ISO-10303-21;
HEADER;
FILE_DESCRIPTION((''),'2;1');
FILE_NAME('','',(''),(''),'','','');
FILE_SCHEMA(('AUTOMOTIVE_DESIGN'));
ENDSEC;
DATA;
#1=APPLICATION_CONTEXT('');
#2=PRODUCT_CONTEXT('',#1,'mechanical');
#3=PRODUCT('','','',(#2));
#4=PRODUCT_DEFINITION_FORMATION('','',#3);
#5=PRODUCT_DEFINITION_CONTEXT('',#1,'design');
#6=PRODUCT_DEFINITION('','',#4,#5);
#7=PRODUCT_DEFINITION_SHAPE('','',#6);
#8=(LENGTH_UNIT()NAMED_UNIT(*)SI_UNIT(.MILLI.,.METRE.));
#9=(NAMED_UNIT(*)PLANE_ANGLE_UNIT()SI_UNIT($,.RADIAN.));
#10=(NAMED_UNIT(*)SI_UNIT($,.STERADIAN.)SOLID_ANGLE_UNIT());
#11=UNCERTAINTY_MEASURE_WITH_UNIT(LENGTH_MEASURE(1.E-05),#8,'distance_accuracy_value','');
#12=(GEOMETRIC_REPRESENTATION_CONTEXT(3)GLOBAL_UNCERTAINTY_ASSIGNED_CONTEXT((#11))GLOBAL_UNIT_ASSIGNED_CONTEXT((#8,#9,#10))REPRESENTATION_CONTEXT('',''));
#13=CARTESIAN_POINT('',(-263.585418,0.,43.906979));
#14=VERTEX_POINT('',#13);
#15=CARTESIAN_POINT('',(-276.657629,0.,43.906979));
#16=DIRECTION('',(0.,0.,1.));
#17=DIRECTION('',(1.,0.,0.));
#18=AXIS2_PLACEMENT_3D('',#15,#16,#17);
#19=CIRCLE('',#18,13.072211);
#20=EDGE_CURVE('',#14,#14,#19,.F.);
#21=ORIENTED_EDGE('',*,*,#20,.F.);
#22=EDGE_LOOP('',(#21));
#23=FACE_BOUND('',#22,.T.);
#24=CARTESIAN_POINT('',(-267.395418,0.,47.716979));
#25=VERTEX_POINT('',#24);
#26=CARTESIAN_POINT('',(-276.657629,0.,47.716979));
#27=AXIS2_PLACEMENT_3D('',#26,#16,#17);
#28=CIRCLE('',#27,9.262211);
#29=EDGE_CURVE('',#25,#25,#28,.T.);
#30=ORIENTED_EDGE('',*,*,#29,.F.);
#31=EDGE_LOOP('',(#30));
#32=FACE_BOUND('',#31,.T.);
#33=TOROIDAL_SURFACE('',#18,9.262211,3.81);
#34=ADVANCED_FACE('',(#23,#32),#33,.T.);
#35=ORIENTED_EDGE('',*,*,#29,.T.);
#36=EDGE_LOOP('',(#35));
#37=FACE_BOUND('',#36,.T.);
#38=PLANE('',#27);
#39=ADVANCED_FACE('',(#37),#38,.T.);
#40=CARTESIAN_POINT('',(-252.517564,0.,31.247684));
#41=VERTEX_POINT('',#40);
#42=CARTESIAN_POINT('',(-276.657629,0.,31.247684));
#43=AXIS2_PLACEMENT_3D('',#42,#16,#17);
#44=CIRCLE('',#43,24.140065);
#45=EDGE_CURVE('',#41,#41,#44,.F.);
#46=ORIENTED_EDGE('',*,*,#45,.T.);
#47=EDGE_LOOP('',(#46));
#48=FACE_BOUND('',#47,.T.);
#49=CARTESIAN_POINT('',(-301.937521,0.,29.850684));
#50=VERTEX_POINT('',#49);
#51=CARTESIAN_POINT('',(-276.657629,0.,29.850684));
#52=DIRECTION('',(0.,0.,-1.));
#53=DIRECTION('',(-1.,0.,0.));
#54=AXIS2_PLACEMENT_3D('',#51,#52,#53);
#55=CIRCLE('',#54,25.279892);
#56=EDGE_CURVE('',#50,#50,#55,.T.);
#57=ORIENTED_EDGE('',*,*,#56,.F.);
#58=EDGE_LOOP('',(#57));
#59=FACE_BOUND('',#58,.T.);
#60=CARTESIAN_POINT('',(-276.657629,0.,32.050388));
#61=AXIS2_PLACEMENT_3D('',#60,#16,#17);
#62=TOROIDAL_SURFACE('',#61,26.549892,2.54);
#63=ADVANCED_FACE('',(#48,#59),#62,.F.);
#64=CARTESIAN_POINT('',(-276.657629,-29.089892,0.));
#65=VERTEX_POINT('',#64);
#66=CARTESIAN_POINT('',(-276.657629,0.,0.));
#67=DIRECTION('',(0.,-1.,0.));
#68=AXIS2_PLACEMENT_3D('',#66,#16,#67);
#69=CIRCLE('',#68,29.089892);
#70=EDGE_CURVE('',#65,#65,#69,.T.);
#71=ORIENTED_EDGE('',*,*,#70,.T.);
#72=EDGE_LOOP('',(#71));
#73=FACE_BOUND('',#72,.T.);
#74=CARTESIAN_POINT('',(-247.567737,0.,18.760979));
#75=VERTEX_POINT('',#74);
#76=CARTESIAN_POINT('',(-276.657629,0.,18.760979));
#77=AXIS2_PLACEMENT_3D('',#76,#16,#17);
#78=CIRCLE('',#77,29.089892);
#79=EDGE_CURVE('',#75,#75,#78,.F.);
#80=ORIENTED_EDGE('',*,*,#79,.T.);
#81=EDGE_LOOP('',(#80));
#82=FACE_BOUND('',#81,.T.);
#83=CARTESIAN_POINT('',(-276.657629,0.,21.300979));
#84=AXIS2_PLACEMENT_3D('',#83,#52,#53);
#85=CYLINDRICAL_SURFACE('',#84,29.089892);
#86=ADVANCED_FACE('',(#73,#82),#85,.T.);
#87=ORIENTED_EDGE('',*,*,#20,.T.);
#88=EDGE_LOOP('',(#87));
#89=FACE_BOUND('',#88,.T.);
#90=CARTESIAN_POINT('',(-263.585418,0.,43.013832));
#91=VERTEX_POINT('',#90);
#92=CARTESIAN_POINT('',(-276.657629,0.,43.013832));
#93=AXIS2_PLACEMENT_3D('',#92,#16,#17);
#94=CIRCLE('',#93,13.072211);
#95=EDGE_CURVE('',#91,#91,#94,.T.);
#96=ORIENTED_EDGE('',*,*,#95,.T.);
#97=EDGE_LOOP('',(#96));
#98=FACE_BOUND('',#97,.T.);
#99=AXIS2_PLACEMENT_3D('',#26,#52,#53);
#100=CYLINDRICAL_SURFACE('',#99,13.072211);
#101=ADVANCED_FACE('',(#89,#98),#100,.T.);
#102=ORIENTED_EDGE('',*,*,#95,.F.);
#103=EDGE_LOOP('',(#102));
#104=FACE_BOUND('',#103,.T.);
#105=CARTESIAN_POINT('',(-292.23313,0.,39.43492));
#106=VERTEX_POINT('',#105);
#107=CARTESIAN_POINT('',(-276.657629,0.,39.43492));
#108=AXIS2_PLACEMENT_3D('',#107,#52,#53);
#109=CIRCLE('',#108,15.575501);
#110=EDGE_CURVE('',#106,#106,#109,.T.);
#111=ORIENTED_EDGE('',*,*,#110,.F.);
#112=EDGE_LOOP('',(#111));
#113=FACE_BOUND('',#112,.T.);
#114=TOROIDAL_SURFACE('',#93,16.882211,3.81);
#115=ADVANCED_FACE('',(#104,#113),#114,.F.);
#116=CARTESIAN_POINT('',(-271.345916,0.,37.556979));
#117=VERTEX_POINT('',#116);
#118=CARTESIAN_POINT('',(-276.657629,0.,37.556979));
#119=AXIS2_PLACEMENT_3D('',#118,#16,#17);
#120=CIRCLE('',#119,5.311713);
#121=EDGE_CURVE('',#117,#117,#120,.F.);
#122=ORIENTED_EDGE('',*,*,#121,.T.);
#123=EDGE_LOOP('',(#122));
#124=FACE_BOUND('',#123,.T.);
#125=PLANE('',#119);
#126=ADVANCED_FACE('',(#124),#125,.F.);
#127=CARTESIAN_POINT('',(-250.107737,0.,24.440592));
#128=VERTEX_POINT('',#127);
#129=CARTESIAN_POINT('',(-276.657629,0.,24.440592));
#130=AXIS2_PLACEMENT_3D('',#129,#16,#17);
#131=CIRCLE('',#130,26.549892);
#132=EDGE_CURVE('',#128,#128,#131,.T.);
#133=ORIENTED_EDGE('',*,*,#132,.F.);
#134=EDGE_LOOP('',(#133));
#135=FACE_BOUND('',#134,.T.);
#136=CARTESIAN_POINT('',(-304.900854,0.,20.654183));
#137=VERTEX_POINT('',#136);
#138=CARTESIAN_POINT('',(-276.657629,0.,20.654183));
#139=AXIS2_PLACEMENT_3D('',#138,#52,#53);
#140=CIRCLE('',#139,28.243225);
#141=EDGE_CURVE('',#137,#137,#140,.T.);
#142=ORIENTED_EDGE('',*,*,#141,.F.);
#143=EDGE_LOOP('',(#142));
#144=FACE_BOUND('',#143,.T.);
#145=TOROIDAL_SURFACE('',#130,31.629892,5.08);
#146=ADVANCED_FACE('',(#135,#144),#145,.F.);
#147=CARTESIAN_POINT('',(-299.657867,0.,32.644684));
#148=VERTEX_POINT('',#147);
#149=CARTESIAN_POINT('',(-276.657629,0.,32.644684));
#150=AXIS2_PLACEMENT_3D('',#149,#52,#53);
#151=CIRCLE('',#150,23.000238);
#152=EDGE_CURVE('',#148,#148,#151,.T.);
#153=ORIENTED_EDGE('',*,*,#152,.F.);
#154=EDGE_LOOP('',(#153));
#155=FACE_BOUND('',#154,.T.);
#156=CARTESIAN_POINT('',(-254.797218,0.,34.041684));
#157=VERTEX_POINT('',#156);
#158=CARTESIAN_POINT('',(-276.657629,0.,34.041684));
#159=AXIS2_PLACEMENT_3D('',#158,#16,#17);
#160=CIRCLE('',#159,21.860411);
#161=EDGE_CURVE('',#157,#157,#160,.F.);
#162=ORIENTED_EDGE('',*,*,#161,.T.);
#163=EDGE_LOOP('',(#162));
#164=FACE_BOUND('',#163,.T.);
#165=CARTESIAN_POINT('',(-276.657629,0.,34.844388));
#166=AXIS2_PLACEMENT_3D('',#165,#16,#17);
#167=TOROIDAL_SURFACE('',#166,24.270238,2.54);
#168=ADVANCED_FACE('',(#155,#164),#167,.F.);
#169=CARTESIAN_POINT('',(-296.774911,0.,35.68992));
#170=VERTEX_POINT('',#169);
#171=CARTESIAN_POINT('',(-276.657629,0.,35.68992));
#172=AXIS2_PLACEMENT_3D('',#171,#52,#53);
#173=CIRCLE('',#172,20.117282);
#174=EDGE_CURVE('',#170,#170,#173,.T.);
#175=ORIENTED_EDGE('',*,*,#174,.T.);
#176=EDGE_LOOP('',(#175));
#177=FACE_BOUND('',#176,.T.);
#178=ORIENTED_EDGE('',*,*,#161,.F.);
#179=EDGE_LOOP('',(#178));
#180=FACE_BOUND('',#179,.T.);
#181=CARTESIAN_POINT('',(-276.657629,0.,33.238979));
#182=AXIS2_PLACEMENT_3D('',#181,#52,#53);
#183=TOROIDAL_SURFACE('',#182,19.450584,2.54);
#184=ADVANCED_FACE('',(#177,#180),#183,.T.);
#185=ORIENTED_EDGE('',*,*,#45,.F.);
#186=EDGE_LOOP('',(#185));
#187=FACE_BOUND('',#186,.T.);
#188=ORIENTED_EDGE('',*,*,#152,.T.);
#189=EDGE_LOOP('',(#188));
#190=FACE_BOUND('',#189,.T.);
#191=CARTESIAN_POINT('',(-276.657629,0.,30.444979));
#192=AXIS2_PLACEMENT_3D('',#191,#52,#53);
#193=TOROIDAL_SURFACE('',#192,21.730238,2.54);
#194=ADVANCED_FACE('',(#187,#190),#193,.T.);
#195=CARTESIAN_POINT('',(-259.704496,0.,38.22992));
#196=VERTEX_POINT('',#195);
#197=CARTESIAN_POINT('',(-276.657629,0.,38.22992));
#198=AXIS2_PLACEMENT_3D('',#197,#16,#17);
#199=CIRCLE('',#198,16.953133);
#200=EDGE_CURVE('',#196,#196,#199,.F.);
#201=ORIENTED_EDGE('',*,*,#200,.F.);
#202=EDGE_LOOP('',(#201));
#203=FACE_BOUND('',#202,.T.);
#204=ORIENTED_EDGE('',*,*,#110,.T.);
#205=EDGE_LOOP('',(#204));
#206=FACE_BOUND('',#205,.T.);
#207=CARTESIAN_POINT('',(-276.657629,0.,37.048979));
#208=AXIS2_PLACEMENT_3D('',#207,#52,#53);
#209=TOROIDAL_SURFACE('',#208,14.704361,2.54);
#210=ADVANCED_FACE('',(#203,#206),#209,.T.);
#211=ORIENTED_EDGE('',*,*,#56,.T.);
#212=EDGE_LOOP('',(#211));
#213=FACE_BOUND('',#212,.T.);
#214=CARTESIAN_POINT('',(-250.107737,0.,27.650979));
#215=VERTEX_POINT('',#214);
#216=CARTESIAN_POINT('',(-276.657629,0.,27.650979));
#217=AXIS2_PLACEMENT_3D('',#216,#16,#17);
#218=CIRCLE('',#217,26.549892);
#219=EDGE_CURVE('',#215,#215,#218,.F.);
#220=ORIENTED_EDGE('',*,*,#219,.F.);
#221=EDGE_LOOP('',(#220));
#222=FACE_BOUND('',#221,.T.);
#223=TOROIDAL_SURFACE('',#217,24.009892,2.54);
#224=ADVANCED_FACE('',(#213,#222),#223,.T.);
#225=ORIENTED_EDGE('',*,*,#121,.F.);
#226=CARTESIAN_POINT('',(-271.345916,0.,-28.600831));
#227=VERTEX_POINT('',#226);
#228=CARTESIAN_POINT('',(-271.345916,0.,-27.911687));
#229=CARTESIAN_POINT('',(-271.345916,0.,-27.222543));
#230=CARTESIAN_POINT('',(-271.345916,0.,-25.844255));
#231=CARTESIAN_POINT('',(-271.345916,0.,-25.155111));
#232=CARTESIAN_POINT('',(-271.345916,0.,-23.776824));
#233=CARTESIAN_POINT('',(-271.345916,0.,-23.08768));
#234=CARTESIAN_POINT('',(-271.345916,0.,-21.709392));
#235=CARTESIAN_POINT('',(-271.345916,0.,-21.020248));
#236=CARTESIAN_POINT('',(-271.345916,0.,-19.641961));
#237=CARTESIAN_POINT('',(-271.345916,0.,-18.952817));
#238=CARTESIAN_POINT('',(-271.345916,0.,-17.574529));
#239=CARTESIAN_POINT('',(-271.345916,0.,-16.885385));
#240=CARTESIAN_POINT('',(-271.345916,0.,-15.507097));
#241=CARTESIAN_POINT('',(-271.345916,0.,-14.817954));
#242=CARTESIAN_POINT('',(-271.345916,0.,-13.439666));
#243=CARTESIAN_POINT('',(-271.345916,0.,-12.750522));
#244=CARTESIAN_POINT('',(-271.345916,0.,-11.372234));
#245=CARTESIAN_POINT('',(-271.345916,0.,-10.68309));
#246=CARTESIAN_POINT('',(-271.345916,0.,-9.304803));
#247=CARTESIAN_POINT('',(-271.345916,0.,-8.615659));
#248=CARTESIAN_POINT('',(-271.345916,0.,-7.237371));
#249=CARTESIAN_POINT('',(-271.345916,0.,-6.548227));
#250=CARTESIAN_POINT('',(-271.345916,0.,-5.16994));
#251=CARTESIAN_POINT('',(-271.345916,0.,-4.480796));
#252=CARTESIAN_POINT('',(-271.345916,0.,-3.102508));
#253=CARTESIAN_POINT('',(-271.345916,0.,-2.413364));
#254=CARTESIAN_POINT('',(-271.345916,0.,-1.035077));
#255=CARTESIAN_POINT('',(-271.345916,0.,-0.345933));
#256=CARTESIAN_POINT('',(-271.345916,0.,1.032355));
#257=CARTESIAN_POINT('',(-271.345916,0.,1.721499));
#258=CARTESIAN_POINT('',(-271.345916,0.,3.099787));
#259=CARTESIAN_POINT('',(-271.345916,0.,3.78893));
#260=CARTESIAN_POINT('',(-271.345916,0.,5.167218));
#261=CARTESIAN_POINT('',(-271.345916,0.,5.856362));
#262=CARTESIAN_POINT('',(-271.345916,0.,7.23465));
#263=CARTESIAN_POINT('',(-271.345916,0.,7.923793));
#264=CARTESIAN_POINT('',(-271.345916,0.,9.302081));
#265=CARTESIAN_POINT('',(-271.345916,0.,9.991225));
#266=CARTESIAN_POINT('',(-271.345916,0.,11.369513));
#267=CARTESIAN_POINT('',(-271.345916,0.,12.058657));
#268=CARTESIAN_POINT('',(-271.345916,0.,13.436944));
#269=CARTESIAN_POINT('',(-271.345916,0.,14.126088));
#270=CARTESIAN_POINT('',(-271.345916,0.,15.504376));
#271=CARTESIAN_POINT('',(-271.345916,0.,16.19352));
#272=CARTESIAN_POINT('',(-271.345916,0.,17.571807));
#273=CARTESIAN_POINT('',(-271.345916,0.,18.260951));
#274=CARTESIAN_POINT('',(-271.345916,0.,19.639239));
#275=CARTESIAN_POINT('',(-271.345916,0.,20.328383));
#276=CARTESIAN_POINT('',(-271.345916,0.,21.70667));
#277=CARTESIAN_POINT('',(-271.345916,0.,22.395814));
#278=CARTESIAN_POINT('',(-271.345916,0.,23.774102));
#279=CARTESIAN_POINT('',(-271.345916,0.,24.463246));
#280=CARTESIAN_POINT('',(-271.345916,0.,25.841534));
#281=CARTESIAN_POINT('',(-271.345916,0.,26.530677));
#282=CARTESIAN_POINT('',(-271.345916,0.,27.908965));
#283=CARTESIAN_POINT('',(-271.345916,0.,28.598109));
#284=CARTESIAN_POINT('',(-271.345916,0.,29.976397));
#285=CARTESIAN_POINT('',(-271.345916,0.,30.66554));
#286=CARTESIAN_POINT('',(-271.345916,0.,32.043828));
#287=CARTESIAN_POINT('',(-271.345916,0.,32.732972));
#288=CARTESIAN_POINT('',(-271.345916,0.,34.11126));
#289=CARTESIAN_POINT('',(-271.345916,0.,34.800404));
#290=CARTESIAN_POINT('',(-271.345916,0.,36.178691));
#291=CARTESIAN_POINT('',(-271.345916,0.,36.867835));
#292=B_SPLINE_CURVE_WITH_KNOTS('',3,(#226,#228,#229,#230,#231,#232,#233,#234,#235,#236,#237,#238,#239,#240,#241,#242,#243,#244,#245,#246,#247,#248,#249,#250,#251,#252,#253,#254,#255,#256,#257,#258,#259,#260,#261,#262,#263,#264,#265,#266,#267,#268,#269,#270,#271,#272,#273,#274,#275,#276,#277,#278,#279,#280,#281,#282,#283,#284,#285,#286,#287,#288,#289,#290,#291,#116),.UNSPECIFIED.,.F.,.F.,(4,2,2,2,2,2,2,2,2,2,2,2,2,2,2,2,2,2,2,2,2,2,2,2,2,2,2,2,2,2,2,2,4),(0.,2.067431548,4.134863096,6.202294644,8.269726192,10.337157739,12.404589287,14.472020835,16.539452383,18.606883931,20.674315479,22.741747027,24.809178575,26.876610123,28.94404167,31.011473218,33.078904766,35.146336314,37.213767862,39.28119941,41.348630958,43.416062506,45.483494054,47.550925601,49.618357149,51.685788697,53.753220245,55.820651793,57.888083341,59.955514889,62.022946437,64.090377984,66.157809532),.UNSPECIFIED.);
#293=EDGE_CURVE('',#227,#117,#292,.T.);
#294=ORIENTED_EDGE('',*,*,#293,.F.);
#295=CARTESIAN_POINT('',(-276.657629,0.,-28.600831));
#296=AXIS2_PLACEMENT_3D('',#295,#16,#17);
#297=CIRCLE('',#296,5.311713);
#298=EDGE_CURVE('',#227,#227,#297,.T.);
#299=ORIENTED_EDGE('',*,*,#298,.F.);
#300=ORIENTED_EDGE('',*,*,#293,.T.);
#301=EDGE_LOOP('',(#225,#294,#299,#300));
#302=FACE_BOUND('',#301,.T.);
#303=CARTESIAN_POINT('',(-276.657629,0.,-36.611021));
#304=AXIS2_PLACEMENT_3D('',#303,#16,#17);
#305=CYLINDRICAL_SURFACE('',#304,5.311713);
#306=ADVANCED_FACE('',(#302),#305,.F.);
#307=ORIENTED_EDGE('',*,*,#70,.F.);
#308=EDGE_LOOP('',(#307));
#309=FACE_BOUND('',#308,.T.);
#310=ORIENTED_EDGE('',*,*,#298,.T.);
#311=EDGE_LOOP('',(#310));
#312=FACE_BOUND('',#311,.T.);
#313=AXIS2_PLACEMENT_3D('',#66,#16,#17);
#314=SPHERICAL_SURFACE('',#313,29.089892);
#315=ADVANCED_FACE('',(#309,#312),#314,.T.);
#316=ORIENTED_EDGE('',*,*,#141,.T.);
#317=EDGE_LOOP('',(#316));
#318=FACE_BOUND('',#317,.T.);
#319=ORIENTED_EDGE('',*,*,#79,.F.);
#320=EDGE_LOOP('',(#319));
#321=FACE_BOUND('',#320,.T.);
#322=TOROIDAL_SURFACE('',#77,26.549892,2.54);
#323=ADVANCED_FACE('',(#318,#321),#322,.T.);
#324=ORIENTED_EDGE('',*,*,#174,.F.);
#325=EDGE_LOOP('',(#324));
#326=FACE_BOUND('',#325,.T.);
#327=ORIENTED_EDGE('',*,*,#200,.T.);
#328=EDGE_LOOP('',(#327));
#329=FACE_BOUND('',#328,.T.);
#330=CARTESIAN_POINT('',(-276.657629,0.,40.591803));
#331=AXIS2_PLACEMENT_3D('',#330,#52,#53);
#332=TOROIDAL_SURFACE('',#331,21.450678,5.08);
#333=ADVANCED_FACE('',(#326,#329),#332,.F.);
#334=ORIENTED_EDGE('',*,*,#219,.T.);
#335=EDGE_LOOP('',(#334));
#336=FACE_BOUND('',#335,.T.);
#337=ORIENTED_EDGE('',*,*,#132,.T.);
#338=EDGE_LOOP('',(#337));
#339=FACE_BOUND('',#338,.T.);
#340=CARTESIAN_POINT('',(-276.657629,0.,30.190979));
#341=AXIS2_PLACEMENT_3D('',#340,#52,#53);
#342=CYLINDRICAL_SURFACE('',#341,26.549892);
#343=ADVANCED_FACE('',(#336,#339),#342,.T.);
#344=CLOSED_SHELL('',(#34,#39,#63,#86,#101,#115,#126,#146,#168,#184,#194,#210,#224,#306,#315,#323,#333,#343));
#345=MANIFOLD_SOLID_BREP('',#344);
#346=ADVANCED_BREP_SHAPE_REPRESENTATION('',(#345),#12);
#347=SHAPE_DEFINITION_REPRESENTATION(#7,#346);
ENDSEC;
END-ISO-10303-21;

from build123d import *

# Parameters (mm, degrees)
SKETCH5_R            = 29.089891807
BOSS_EXTRUDE1_DEPTH  = 21.300978991
FILLET1_R            = 2.54
SKETCH6_R            = 26.549891807
BOSS_EXTRUDE5_DEPTH  = 8.89
FILLET7_R            = 2.54
SKETCH9_R            = 24.009891807
BOSS_EXTRUDE6_DEPTH  = 2.794
FILLET8_R            = 2.54
FILLET9_R            = 2.54
SKETCH11_R           = 21.730238108
BOSS_EXTRUDE7_DEPTH  = 2.794
FILLET10_R           = 2.54
FILLET11_R           = 2.54
SKETCH12_R           = 16.470643336
BOSS_EXTRUDE8_DEPTH  = 3.81
FILLET12_R           = 5.08
FILLET13_R           = 2.54
SKETCH13_R           = 13.072210804
BOSS_EXTRUDE9_DEPTH  = 8.128
FILLET14_R           = 3.81
FILLET15_R           = 3.81
FILLET17_R           = 5.08
SKETCH15_R           = 5.311713254
CUT_EXTRUDE1_DEPTH   = 84.328
SKETCH16_R           = 5.311713254
BOSS_EXTRUDE10_DEPTH = 10.16


with BuildPart() as part:
    # Revolve1: read off the stored shape, not the designer's step
    # Revolve1 outline → Revolve1 (revolve)
    with BuildSketch(Plane(origin=(-276.657629022, 0, 0), x_dir=(1, 0, 0), z_dir=(0, -1, 0))):
        with BuildLine():
            Line((0, 2.9e-08), (0, -29.089891807))
            ThreePointArc((0, -29.089891807), (20.569659771, -20.569659751), (29.089891807, 2.9e-08))
            Line((29.089891807, 2.9e-08), (0, 2.9e-08))
        make_face()
    revolve(axis=Axis((-276.657629022, 0, 0), (0, 0, 1)))

    # Sketch5 → Boss-Extrude1 (add)
    with BuildSketch(Plane.XY):
        with Locations(Location((-276.657629022, 0, 0), (0, 0, 270))):
            Circle(SKETCH5_R)
    extrude(amount=BOSS_EXTRUDE1_DEPTH)

    # Fillet1
    fillet1_edges = [part.edges().sort_by_distance(p)[0] for p in [
        (-276.657629022, 29.089891807, 21.300978991),
    ]]
    fillet(fillet1_edges, radius=FILLET1_R)

    # Sketch6 → Boss-Extrude5 (add)
    with BuildSketch(Plane.XY.offset(21.300978991)):
        with Locations((-276.657629022, 0)):
            Circle(SKETCH6_R)
    extrude(amount=BOSS_EXTRUDE5_DEPTH)

    # Fillet7
    fillet7_edges = [part.edges().sort_by_distance(p)[0] for p in [
        (-303.207520829, 0, 30.190978991),
    ]]
    fillet(fillet7_edges, radius=FILLET7_R)

    # Sketch9 → Boss-Extrude6 (add)
    with BuildSketch(Plane.XY.offset(30.190978991)):
        with Locations((-276.657629022, 0)):
            Circle(SKETCH9_R)
    extrude(amount=BOSS_EXTRUDE6_DEPTH)

    # Fillet8
    fillet8_edges = [part.edges().sort_by_distance(p)[0] for p in [
        (-300.667520829, 0, 30.190978991),
    ]]
    fillet(fillet8_edges, radius=FILLET8_R)

    # Fillet9
    fillet9_edges = [part.edges().sort_by_distance(p)[0] for p in [
        (-300.667520829, 0, 32.984978991),
    ]]
    fillet(fillet9_edges, radius=FILLET9_R)

    # Sketch11 → Boss-Extrude7 (add)
    with BuildSketch(Plane.XY.offset(32.984978991)):
        with Locations((-276.657629022, 0)):
            Circle(SKETCH11_R)
    extrude(amount=BOSS_EXTRUDE7_DEPTH)

    # Fillet10
    fillet10_edges = [part.edges().sort_by_distance(p)[0] for p in [
        (-298.38786713, 0, 32.984978991),
    ]]
    fillet(fillet10_edges, radius=FILLET10_R)

    # Fillet11
    fillet11_edges = [part.edges().sort_by_distance(p)[0] for p in [
        (-298.38786713, 0, 35.778978991),
    ]]
    fillet(fillet11_edges, radius=FILLET11_R)

    # Sketch12 → Boss-Extrude8 (add)
    with BuildSketch(Plane.XY.offset(35.778978991)):
        with Locations((-276.657629022, 0)):
            Circle(SKETCH12_R)
    extrude(amount=BOSS_EXTRUDE8_DEPTH)

    # Fillet12
    # the kernel refuses this fillet: 5.08 mm, written as the material it adds along each edge
    with BuildSketch(Plane(origin=(-276.657629022, 0, 35.778978991), x_dir=(1, 0, 0), z_dir=(0, -1, 0))) as fillet12_piece_1:
        with BuildLine():
            CenterArc((21.4506778, 4.812824385), FILLET12_R, 191.385331721, 63.397433483)
            Line((16.470643336, 3.81), (15.97263989, 3.709717562))
            ThreePointArc((15.97263989, 3.709717562), (15.962643336, 1.905), (15.962643336, 0))
            Line((15.962643336, 0), (16.470643336, -0.508))
            ThreePointArc((16.470643336, -0.508), (19.450584409, -0.508), (19.983942647, -0.579246831))
            Line((19.983942647, -0.579246831), (20.117282206, -0.089058538))
        make_face()
    revolve(axis=Axis((-276.657629022, 0, 35.778978991), (0, 0, 1)))

    # Fillet13
    fillet13_edges = [part.edges().sort_by_distance(p)[0] for p in [
        (-293.128272358, 0, 39.588978991),
    ]]
    fillet(fillet13_edges, radius=FILLET13_R)

    # Sketch13 → Boss-Extrude9 (add)
    with BuildSketch(Plane.XY.offset(39.588978991)):
        with Locations((-276.657629022, 0)):
            Circle(SKETCH13_R)
    extrude(amount=BOSS_EXTRUDE9_DEPTH)

    # Fillet14
    fillet14_edges = [part.edges().sort_by_distance(p)[0] for p in [
        (-289.729839826, 0, 47.716978991),
    ]]
    fillet(fillet14_edges, radius=FILLET14_R)

    # Fillet15
    fillet15_edges = [part.edges().sort_by_distance(p)[0] for p in [
        (-289.729839826, 0, 39.588978991),
    ]]
    fillet(fillet15_edges, radius=FILLET15_R)

    # Fillet17
    fillet17_edges = [part.edges().sort_by_distance(p)[0] for p in [
        (-257.884020485, -18.773608537, 21.300978991),
    ]]
    fillet(fillet17_edges, radius=FILLET17_R)

    # Sketch15 → Cut-Extrude1 (cut)
    with BuildSketch(Plane.XY.offset(47.716978991)):
        with Locations((-276.657629022, 0)):
            Circle(SKETCH15_R)
    extrude(amount=-CUT_EXTRUDE1_DEPTH, mode=Mode.SUBTRACT)

    # Sketch16 → Boss-Extrude10 (add)
    with BuildSketch(Plane.XY.offset(47.716978991)):
        with Locations((-276.657629022, 0)):
            Circle(SKETCH16_R)
    extrude(amount=-BOSS_EXTRUDE10_DEPTH)


solid = part.part
